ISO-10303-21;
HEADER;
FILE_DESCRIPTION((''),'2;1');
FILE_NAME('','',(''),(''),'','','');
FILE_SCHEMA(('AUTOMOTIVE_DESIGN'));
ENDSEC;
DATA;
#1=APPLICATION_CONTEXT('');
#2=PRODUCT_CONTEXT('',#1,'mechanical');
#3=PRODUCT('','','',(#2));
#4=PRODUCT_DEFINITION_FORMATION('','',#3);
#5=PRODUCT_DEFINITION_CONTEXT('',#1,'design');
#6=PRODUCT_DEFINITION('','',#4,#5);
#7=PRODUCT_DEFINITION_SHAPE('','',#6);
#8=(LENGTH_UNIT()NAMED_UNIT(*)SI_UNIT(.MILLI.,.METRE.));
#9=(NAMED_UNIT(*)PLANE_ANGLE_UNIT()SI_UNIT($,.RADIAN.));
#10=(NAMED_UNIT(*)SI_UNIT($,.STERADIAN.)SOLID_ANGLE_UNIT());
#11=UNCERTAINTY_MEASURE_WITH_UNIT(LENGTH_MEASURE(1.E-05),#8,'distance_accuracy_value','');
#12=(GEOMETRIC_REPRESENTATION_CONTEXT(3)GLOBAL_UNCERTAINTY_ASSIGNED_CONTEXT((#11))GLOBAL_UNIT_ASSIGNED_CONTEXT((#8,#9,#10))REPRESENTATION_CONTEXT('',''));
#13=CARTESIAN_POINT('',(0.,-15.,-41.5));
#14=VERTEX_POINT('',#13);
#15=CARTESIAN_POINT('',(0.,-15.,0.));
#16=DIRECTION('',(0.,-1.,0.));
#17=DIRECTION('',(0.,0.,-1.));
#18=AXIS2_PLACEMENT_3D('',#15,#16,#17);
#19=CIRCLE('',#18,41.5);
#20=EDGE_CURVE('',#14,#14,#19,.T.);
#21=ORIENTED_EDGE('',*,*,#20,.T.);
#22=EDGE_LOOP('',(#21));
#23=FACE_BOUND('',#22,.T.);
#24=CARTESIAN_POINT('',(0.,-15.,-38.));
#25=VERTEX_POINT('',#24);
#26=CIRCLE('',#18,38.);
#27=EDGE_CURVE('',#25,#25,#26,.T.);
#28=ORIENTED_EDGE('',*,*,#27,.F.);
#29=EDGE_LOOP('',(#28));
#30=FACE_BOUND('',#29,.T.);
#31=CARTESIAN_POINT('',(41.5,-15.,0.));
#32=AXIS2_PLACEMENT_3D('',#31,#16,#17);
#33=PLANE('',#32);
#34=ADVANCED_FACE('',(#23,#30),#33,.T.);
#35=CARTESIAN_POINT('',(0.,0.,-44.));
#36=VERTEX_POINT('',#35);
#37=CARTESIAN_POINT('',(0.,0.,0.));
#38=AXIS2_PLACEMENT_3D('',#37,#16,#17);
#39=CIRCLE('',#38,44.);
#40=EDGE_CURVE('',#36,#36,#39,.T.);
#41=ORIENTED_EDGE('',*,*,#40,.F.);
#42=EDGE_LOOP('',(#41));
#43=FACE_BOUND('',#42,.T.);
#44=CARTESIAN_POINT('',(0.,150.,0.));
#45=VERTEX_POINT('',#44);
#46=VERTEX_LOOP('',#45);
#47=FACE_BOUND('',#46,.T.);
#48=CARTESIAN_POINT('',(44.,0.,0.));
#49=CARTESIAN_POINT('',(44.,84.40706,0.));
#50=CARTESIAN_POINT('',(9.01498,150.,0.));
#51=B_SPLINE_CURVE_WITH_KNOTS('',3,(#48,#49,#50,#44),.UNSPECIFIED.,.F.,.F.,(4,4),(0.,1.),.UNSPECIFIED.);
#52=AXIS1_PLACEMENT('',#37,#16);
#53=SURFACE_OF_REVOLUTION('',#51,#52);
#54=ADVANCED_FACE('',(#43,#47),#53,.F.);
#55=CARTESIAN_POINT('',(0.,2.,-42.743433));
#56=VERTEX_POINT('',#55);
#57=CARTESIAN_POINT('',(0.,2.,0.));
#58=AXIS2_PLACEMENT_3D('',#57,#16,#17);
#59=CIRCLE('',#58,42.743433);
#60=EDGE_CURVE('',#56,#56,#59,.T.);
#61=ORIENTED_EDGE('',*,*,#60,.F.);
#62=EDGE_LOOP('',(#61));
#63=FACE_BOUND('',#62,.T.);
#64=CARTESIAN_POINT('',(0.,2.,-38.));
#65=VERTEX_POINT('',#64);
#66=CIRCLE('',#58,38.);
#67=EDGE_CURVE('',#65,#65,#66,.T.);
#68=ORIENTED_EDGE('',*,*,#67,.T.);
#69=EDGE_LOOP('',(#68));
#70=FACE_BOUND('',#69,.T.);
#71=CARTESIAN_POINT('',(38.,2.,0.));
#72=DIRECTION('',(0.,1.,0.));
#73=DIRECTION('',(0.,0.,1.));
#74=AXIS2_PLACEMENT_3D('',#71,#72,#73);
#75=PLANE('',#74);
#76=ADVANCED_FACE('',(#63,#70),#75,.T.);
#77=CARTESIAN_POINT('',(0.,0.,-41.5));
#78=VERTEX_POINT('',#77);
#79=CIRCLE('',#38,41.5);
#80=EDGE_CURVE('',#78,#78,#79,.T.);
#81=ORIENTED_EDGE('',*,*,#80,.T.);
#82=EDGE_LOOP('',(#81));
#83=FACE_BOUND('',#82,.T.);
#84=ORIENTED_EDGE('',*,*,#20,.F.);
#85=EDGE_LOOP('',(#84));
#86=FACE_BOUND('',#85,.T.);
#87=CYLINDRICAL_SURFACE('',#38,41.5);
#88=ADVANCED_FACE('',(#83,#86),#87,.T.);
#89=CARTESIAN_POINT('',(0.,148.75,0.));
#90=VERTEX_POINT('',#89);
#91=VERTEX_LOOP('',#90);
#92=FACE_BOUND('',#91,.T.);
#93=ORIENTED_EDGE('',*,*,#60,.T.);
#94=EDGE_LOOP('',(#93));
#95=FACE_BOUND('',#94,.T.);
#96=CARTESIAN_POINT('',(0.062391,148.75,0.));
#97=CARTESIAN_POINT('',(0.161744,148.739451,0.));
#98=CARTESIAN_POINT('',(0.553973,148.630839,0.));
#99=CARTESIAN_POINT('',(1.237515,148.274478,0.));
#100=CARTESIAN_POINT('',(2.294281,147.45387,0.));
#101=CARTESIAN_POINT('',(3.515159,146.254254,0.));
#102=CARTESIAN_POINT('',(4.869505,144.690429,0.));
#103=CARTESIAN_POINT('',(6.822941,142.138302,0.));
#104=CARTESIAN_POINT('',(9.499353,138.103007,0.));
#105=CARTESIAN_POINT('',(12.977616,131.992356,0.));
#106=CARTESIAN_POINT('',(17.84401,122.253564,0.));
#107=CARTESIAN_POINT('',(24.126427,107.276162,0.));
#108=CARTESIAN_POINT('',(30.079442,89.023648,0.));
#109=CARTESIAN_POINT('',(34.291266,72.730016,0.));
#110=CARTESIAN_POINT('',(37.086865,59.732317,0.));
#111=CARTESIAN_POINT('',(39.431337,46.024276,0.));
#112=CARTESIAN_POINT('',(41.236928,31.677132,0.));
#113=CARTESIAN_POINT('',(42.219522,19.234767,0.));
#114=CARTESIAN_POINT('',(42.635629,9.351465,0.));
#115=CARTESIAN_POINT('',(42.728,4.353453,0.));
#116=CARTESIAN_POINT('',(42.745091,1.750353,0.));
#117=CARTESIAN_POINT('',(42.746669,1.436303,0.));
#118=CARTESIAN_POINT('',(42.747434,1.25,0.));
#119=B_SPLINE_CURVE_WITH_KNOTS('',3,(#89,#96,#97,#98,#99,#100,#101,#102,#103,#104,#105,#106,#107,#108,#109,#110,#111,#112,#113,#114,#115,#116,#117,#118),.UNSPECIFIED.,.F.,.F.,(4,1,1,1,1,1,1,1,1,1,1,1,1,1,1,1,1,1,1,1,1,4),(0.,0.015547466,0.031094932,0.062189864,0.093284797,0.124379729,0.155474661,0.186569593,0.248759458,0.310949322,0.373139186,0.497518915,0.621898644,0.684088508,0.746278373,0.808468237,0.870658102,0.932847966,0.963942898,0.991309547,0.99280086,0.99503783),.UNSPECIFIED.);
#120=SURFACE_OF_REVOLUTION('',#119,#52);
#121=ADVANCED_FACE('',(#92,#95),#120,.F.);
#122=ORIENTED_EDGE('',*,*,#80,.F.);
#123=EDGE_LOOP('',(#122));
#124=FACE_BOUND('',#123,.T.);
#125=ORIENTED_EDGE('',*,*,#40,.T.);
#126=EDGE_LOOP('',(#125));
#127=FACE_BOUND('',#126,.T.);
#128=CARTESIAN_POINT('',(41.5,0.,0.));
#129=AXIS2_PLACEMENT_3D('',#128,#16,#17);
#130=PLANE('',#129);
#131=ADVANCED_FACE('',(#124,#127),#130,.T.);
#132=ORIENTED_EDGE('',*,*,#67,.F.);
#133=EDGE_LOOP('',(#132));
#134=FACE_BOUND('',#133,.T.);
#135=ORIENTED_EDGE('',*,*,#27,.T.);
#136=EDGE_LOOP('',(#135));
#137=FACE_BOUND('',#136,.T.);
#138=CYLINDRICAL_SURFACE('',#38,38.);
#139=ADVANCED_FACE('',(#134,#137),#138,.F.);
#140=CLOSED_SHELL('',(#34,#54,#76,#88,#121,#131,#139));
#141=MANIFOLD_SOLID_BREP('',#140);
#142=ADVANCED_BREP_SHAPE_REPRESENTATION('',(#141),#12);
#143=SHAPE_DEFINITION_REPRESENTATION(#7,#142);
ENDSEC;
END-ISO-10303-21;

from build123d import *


with BuildPart() as part:
    # Sketch1 → Revolve1 (revolve)
    with BuildSketch(Plane.XY):
        with BuildLine():
            Line((41.5, 0), (44, 0))
            add(Edge.make_bspline(
                [(0, 150), (9.014979846, 150), (44, 84.407059953), (44, 0)],
                knots=[0, 0, 0, 0, 1, 1, 1, 1], degree=3))
            Line((0, 150), (0, 148.75))
            add(Edge.make_bspline(
                [(0, 148.75), (0.06239056, 148.75), (0.161743714, 148.739451329), (0.553973413, 148.630839322), (1.237514939, 148.274478014), (2.294281092, 147.453869912), (3.515158737, 146.254254098), (4.869505468, 144.690429147), (6.822941266, 142.138302248), (9.499352835, 138.103007179), (12.977615857, 131.992355554), (17.844010447, 122.253564223), (24.126426873, 107.276162171), (30.07944231, 89.023648), (34.291265548, 72.73001568), (37.086864573, 59.732316722), (39.431337241, 46.024275958), (41.236927587, 31.67713195), (42.219521942, 19.234766651), (42.635628651, 9.351465349), (42.726851303, 4.415615123), (42.743022792, 2.06245776), (42.743432753, 2)],
                knots=[0, 0, 0, 0, 0.015547466, 0.031094932, 0.062189864, 0.093284797, 0.124379729, 0.155474661, 0.186569593, 0.248759458, 0.310949322, 0.373139186, 0.497518915, 0.621898644, 0.684088508, 0.746278373, 0.808468237, 0.870658102, 0.932847966, 0.963942898, 0.991309547, 0.992055204, 0.992055204, 0.992055204, 0.992055204], degree=3))
            Line((42.743432753, 2), (38, 2))
            Line((38, 2), (38, -15))
            Line((38, -15), (41.5, -15))
            Line((41.5, -15), (41.5, 0))
        make_face()
    revolve(axis=Axis((0, 0, 0), (0, 1, 0)))


solid = part.part
